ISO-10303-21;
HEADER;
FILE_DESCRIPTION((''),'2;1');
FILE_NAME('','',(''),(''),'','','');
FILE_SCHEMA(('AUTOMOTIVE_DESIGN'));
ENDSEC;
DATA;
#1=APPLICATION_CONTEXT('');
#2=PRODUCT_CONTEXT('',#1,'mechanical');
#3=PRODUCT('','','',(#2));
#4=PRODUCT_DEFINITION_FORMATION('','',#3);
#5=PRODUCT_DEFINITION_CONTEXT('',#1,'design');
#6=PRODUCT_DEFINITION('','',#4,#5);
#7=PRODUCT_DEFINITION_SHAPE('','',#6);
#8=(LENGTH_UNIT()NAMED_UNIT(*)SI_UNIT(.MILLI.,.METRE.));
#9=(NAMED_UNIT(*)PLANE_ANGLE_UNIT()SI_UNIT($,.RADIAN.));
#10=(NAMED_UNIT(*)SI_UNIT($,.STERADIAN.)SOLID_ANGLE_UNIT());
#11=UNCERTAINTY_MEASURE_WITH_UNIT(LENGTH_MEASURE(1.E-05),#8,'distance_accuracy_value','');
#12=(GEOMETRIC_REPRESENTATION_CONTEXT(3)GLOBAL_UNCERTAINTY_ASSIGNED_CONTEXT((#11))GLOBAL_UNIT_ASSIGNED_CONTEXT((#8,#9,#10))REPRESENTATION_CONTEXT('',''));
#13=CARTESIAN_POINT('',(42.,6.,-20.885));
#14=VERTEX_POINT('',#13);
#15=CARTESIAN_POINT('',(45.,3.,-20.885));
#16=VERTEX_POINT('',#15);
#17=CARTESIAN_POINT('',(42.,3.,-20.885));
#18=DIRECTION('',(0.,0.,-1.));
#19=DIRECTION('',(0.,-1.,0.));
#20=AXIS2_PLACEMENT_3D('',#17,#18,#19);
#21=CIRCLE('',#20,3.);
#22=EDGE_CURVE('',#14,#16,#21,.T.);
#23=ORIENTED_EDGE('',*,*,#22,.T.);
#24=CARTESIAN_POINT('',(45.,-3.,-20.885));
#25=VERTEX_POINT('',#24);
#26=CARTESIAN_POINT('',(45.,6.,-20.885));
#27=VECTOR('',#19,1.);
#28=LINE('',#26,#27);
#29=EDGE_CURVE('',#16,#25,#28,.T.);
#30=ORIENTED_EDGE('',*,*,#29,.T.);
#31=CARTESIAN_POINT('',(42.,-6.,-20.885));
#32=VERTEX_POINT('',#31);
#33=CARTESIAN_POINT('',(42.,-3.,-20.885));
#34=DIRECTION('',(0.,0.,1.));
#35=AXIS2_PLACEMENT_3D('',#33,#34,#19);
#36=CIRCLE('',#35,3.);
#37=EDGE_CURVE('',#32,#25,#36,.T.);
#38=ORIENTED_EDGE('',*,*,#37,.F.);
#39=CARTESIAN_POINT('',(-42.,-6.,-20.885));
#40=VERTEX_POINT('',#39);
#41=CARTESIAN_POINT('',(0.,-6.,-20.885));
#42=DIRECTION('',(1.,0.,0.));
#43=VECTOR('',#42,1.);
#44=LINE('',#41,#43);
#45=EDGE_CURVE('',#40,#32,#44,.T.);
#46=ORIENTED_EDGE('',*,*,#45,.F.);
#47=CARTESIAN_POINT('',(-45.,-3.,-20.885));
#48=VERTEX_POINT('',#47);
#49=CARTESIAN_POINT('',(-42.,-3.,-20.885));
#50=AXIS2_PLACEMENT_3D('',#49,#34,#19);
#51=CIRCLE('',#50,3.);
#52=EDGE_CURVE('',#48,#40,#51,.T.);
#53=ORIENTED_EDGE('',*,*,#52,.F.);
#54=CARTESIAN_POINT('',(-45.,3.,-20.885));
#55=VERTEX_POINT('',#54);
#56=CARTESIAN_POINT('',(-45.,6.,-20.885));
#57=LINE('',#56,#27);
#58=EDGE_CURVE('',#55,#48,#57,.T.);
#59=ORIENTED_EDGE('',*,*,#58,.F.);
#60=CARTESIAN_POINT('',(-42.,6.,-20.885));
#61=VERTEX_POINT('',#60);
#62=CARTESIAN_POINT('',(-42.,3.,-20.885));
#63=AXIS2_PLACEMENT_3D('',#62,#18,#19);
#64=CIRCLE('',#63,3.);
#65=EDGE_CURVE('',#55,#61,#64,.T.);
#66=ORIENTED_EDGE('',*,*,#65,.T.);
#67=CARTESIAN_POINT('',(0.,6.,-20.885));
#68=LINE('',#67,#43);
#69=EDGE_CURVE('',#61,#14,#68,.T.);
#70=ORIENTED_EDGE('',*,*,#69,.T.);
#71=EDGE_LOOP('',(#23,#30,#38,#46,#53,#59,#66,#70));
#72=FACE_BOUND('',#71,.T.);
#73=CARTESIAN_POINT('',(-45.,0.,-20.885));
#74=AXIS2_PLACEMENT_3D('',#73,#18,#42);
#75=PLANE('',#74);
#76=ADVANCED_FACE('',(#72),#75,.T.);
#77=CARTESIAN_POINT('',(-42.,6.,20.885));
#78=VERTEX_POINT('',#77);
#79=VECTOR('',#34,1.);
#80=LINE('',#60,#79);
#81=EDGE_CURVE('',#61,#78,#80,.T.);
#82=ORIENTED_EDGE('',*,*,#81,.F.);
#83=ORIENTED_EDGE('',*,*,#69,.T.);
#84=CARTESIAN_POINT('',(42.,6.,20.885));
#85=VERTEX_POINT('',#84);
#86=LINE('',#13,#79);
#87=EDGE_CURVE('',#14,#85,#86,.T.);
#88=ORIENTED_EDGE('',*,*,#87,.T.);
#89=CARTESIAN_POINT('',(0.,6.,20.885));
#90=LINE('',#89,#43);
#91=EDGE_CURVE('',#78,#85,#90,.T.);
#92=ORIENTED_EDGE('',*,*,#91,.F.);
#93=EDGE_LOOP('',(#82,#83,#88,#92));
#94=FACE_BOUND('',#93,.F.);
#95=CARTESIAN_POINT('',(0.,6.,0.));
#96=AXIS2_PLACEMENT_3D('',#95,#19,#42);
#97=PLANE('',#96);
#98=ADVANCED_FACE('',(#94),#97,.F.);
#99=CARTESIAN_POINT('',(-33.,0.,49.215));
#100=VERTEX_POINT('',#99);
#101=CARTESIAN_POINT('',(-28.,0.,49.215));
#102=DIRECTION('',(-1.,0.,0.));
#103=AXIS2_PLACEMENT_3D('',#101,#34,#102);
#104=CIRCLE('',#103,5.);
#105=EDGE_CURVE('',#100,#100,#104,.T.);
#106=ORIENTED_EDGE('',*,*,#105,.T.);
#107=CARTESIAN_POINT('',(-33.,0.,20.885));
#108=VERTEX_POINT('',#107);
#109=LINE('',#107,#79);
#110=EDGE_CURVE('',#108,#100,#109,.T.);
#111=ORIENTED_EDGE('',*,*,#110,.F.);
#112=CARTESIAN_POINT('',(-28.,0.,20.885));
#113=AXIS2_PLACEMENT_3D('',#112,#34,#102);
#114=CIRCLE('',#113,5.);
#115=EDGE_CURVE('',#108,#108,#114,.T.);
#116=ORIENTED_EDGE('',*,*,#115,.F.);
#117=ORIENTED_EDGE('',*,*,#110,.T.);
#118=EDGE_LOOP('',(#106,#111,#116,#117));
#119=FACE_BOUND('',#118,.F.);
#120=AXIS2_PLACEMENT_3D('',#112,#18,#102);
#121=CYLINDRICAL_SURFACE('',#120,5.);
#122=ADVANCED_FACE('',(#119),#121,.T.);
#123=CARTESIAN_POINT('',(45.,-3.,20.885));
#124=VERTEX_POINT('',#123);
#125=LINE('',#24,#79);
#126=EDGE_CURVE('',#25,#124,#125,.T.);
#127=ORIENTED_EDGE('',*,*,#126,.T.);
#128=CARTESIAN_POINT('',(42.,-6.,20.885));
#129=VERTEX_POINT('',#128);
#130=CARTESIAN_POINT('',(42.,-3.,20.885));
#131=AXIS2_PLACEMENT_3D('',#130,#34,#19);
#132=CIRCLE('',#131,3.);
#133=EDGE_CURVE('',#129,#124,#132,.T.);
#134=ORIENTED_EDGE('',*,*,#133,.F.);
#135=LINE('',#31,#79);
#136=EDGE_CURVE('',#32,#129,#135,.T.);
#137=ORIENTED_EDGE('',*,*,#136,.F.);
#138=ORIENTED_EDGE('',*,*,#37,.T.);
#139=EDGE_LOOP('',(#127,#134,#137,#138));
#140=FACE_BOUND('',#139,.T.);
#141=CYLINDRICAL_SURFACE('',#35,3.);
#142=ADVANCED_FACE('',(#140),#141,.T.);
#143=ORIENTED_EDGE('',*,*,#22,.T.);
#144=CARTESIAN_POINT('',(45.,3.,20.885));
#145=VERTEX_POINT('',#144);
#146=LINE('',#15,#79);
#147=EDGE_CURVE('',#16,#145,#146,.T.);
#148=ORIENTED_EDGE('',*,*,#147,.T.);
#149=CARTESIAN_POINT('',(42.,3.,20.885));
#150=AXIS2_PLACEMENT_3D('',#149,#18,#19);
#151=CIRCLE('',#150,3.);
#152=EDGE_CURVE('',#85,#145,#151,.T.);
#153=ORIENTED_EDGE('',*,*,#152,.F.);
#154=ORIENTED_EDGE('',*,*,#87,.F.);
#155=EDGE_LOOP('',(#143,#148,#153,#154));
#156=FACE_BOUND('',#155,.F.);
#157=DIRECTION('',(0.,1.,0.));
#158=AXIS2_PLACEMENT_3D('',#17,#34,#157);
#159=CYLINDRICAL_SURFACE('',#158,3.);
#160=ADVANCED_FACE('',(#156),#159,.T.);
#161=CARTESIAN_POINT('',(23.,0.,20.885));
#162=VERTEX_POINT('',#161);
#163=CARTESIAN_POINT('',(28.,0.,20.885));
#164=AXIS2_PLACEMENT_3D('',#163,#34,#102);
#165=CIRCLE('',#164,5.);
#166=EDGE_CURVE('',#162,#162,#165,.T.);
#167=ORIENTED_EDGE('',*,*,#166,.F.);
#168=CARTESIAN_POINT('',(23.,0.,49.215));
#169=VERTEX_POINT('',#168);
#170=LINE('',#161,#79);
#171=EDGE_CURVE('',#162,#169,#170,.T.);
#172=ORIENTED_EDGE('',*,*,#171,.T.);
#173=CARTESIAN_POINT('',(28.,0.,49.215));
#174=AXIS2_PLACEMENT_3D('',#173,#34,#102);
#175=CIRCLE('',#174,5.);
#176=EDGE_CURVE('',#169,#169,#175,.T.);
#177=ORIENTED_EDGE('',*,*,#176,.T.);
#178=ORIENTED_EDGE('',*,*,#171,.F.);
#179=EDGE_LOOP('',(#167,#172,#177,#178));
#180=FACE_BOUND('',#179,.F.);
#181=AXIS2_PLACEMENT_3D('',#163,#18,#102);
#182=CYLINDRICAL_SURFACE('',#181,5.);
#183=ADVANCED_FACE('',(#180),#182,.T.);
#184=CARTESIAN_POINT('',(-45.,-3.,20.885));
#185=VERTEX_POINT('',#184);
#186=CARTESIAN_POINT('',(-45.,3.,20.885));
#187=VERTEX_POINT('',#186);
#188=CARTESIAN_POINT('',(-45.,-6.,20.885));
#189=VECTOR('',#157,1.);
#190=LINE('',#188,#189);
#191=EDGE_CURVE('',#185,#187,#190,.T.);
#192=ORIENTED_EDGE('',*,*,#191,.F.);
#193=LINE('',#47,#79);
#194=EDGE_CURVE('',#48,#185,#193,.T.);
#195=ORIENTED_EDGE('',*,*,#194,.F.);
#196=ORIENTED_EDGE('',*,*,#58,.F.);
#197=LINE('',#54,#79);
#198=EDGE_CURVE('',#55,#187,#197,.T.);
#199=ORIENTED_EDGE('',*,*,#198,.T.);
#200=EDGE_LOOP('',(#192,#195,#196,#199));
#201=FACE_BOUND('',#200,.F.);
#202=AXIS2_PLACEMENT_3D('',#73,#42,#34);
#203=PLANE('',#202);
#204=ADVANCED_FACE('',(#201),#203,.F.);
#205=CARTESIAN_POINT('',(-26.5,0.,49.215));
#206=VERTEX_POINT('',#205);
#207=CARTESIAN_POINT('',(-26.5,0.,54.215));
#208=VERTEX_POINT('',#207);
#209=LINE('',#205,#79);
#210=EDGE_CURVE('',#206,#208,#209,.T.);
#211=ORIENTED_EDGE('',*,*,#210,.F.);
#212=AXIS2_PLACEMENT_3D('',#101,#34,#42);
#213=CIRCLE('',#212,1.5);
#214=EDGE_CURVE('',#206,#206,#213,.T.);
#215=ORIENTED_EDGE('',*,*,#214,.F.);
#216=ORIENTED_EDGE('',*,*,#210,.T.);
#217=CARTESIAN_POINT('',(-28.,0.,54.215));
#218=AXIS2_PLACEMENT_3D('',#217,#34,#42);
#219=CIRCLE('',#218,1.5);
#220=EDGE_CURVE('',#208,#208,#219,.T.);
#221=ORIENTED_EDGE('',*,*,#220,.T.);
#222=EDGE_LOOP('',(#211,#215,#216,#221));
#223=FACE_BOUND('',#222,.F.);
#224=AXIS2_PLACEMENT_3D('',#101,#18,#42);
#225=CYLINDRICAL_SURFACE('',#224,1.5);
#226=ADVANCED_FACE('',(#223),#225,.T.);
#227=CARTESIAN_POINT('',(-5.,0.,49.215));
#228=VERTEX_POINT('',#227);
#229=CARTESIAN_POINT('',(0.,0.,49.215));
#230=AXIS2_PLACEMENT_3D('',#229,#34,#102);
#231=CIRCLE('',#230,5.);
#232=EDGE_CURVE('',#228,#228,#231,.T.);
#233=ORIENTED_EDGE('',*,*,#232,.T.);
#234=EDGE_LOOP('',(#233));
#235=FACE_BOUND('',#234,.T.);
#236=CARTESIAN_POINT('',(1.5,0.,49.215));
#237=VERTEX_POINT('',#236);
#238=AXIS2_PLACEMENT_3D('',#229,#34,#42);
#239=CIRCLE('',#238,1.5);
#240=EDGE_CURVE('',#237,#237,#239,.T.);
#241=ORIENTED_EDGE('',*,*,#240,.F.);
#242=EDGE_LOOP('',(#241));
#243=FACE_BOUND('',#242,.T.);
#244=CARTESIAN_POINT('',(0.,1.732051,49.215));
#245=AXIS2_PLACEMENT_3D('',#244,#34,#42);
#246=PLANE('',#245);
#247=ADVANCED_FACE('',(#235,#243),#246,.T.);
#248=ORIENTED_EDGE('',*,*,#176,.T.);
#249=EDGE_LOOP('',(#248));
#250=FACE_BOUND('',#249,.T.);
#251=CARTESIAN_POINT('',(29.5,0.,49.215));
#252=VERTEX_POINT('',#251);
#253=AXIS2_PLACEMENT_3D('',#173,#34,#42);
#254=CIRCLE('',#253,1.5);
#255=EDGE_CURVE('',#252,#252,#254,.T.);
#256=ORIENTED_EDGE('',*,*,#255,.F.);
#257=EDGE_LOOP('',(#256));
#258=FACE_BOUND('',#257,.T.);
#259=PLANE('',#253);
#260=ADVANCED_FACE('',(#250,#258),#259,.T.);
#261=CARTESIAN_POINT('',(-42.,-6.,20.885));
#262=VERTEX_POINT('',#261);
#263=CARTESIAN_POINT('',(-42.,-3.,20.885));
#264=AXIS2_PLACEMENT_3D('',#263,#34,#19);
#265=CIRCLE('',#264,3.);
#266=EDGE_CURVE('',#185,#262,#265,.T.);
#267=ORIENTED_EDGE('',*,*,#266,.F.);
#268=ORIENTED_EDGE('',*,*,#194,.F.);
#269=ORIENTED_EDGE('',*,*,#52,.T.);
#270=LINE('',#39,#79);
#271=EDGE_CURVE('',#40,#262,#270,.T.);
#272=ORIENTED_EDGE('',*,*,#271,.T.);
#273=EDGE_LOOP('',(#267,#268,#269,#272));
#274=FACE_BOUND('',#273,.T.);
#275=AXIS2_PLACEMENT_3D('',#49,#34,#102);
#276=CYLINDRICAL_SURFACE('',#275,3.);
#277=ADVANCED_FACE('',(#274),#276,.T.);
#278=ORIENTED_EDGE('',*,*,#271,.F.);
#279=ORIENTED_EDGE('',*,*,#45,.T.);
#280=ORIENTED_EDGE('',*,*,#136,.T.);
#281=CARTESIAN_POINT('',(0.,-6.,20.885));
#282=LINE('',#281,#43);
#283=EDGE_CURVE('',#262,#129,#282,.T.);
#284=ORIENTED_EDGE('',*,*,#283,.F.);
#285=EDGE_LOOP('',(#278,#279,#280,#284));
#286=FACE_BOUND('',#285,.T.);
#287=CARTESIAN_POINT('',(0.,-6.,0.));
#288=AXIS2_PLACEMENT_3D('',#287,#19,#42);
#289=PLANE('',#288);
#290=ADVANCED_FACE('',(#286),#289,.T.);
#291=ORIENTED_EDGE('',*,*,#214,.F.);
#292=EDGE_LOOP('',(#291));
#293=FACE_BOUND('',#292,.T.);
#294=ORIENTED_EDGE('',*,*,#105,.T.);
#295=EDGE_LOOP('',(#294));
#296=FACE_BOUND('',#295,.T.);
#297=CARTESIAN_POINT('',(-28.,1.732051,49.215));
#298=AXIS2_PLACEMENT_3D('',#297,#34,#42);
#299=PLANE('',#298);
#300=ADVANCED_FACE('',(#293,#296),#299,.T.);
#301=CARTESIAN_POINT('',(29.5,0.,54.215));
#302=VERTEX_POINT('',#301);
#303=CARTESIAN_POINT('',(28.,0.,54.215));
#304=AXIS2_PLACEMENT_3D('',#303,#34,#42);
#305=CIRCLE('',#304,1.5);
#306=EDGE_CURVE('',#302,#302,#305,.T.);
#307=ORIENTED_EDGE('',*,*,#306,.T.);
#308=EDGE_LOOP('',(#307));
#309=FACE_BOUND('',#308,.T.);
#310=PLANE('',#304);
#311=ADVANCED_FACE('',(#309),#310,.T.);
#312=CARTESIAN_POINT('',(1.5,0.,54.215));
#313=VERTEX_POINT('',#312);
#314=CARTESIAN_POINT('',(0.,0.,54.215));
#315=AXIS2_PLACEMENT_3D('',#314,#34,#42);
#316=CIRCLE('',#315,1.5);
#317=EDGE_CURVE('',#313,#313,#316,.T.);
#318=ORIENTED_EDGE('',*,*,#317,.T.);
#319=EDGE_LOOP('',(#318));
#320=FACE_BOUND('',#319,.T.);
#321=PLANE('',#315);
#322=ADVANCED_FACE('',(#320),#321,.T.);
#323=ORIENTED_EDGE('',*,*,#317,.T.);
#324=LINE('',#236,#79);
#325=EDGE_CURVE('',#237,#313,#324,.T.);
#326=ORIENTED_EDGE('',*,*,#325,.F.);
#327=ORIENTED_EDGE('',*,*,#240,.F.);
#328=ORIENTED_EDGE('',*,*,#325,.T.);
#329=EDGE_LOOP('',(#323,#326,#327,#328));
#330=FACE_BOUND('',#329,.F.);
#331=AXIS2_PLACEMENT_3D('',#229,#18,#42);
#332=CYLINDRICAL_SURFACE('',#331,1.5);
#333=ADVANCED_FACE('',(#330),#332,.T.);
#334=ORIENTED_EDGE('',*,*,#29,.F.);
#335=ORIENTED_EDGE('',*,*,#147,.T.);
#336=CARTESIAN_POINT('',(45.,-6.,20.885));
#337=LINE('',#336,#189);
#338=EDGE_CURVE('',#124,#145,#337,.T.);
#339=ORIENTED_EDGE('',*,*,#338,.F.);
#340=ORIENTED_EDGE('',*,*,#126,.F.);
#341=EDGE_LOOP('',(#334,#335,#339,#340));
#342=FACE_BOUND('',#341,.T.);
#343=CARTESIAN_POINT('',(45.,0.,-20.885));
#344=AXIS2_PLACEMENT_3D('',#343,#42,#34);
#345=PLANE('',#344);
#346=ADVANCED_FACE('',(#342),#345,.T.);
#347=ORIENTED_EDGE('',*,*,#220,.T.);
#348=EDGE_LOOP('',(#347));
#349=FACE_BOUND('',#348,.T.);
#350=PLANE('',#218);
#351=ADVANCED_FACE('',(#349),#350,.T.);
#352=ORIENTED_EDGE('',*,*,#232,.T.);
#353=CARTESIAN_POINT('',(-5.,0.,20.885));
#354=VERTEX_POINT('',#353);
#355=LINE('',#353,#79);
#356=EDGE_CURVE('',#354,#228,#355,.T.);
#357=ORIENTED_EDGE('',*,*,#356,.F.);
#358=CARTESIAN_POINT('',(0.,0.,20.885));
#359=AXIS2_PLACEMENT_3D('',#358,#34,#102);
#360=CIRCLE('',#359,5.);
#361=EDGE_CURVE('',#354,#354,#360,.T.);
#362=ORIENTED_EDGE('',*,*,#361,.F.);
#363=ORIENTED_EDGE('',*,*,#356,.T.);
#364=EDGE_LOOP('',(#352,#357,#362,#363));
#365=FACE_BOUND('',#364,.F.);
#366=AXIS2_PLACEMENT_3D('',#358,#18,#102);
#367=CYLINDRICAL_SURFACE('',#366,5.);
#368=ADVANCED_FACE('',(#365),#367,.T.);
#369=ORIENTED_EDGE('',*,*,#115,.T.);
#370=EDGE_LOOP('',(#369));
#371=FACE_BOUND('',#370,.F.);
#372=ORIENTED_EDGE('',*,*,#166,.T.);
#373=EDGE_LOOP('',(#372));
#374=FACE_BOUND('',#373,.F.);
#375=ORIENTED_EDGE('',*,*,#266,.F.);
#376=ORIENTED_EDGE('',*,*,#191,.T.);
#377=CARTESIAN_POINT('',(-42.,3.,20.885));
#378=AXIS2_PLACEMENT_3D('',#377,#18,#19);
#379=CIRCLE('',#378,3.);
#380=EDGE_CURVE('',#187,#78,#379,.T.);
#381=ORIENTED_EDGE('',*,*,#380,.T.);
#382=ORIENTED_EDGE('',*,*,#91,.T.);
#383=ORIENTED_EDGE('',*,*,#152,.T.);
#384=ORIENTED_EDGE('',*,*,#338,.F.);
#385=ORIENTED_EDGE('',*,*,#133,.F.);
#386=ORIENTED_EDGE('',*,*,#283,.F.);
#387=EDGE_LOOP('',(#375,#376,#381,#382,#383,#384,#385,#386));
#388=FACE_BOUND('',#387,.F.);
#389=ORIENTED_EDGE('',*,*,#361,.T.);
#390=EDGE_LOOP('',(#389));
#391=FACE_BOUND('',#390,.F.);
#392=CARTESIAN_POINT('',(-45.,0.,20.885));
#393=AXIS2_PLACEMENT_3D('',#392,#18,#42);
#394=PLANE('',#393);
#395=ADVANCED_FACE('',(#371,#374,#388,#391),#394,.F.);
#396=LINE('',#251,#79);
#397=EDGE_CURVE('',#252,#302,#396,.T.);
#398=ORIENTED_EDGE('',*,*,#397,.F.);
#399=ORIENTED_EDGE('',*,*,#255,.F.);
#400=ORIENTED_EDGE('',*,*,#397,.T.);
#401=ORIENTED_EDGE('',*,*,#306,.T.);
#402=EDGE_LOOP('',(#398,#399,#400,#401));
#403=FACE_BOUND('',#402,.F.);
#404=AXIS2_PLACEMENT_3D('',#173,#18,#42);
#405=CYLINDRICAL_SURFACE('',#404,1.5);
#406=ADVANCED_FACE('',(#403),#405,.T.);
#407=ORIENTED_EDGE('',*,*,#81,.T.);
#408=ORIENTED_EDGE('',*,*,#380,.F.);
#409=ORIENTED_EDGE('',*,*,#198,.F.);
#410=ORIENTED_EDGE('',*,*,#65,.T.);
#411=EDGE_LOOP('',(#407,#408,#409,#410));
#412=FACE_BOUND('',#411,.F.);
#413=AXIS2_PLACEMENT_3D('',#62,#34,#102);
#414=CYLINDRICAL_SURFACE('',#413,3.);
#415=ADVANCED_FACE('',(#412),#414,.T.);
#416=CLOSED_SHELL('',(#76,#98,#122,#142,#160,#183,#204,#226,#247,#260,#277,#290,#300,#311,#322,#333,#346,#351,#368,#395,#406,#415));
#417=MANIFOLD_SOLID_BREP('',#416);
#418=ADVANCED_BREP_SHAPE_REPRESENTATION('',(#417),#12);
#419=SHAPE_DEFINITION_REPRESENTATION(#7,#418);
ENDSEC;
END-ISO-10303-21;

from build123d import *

# Parameters (mm, degrees)
F0_W     = 90
F0_H     = 41.77
F1_DEPTH = 6
F3_DEPTH = 28.33
F4_R     = 3
F5_R     = 1.5
F6_DEPTH = 5


with BuildPart() as f1:
    # F0 (on Front) → F1 (new body, symmetric)
    with BuildSketch(Plane.XZ):
        Rectangle(F0_W, F0_H)
    extrude(amount=F1_DEPTH, both=True)

    # F2 (on face) → F3 (join)
    with BuildSketch(Plane.XY.offset(20.885)):
        with BuildLine():
            Line((-28, 0), (-23, 0))
            ThreePointArc((-23, 0), (-28, 5), (-33, 0))
            Line((-33, 0), (-28, 0))
        make_face()
        with BuildLine():
            ThreePointArc((-33, 0), (-28, -5), (-23, 0))
            Line((-23, 0), (-28, 0))
            Line((-28, 0), (-33, 0))
        make_face()
        with BuildLine():
            Line((-5, 0), (0, 0))
            Line((0, 0), (5, 0))
            ThreePointArc((5, 0), (0, 5), (-5, 0))
        make_face()
        with BuildLine():
            Line((5, 0), (0, 0))
            Line((0, 0), (-5, 0))
            ThreePointArc((-5, 0), (0, -5), (5, 0))
        make_face()
        with BuildLine():
            ThreePointArc((33, 0), (28, 5), (23, 0))
            ThreePointArc((23, 0), (28, -5), (33, 0))
        make_face()
    extrude(amount=F3_DEPTH)

    # F4
    f4_edges = [f1.edges().sort_by_distance(p)[0] for p in [
        (45, -6, 0),
        (45, 6, 0),
        (-45, -6, 0),
        (-45, 6, 0),
    ]]
    fillet(f4_edges, radius=F4_R)

    # F5 (on face) → F6 (join)
    with BuildSketch(Plane.XY.offset(49.215)):
        with Locations((-28, 0)):
            Circle(F5_R)
        Circle(F5_R)
        with Locations((28, 0)):
            Circle(F5_R)
    extrude(amount=F6_DEPTH)


solid = f1.part
